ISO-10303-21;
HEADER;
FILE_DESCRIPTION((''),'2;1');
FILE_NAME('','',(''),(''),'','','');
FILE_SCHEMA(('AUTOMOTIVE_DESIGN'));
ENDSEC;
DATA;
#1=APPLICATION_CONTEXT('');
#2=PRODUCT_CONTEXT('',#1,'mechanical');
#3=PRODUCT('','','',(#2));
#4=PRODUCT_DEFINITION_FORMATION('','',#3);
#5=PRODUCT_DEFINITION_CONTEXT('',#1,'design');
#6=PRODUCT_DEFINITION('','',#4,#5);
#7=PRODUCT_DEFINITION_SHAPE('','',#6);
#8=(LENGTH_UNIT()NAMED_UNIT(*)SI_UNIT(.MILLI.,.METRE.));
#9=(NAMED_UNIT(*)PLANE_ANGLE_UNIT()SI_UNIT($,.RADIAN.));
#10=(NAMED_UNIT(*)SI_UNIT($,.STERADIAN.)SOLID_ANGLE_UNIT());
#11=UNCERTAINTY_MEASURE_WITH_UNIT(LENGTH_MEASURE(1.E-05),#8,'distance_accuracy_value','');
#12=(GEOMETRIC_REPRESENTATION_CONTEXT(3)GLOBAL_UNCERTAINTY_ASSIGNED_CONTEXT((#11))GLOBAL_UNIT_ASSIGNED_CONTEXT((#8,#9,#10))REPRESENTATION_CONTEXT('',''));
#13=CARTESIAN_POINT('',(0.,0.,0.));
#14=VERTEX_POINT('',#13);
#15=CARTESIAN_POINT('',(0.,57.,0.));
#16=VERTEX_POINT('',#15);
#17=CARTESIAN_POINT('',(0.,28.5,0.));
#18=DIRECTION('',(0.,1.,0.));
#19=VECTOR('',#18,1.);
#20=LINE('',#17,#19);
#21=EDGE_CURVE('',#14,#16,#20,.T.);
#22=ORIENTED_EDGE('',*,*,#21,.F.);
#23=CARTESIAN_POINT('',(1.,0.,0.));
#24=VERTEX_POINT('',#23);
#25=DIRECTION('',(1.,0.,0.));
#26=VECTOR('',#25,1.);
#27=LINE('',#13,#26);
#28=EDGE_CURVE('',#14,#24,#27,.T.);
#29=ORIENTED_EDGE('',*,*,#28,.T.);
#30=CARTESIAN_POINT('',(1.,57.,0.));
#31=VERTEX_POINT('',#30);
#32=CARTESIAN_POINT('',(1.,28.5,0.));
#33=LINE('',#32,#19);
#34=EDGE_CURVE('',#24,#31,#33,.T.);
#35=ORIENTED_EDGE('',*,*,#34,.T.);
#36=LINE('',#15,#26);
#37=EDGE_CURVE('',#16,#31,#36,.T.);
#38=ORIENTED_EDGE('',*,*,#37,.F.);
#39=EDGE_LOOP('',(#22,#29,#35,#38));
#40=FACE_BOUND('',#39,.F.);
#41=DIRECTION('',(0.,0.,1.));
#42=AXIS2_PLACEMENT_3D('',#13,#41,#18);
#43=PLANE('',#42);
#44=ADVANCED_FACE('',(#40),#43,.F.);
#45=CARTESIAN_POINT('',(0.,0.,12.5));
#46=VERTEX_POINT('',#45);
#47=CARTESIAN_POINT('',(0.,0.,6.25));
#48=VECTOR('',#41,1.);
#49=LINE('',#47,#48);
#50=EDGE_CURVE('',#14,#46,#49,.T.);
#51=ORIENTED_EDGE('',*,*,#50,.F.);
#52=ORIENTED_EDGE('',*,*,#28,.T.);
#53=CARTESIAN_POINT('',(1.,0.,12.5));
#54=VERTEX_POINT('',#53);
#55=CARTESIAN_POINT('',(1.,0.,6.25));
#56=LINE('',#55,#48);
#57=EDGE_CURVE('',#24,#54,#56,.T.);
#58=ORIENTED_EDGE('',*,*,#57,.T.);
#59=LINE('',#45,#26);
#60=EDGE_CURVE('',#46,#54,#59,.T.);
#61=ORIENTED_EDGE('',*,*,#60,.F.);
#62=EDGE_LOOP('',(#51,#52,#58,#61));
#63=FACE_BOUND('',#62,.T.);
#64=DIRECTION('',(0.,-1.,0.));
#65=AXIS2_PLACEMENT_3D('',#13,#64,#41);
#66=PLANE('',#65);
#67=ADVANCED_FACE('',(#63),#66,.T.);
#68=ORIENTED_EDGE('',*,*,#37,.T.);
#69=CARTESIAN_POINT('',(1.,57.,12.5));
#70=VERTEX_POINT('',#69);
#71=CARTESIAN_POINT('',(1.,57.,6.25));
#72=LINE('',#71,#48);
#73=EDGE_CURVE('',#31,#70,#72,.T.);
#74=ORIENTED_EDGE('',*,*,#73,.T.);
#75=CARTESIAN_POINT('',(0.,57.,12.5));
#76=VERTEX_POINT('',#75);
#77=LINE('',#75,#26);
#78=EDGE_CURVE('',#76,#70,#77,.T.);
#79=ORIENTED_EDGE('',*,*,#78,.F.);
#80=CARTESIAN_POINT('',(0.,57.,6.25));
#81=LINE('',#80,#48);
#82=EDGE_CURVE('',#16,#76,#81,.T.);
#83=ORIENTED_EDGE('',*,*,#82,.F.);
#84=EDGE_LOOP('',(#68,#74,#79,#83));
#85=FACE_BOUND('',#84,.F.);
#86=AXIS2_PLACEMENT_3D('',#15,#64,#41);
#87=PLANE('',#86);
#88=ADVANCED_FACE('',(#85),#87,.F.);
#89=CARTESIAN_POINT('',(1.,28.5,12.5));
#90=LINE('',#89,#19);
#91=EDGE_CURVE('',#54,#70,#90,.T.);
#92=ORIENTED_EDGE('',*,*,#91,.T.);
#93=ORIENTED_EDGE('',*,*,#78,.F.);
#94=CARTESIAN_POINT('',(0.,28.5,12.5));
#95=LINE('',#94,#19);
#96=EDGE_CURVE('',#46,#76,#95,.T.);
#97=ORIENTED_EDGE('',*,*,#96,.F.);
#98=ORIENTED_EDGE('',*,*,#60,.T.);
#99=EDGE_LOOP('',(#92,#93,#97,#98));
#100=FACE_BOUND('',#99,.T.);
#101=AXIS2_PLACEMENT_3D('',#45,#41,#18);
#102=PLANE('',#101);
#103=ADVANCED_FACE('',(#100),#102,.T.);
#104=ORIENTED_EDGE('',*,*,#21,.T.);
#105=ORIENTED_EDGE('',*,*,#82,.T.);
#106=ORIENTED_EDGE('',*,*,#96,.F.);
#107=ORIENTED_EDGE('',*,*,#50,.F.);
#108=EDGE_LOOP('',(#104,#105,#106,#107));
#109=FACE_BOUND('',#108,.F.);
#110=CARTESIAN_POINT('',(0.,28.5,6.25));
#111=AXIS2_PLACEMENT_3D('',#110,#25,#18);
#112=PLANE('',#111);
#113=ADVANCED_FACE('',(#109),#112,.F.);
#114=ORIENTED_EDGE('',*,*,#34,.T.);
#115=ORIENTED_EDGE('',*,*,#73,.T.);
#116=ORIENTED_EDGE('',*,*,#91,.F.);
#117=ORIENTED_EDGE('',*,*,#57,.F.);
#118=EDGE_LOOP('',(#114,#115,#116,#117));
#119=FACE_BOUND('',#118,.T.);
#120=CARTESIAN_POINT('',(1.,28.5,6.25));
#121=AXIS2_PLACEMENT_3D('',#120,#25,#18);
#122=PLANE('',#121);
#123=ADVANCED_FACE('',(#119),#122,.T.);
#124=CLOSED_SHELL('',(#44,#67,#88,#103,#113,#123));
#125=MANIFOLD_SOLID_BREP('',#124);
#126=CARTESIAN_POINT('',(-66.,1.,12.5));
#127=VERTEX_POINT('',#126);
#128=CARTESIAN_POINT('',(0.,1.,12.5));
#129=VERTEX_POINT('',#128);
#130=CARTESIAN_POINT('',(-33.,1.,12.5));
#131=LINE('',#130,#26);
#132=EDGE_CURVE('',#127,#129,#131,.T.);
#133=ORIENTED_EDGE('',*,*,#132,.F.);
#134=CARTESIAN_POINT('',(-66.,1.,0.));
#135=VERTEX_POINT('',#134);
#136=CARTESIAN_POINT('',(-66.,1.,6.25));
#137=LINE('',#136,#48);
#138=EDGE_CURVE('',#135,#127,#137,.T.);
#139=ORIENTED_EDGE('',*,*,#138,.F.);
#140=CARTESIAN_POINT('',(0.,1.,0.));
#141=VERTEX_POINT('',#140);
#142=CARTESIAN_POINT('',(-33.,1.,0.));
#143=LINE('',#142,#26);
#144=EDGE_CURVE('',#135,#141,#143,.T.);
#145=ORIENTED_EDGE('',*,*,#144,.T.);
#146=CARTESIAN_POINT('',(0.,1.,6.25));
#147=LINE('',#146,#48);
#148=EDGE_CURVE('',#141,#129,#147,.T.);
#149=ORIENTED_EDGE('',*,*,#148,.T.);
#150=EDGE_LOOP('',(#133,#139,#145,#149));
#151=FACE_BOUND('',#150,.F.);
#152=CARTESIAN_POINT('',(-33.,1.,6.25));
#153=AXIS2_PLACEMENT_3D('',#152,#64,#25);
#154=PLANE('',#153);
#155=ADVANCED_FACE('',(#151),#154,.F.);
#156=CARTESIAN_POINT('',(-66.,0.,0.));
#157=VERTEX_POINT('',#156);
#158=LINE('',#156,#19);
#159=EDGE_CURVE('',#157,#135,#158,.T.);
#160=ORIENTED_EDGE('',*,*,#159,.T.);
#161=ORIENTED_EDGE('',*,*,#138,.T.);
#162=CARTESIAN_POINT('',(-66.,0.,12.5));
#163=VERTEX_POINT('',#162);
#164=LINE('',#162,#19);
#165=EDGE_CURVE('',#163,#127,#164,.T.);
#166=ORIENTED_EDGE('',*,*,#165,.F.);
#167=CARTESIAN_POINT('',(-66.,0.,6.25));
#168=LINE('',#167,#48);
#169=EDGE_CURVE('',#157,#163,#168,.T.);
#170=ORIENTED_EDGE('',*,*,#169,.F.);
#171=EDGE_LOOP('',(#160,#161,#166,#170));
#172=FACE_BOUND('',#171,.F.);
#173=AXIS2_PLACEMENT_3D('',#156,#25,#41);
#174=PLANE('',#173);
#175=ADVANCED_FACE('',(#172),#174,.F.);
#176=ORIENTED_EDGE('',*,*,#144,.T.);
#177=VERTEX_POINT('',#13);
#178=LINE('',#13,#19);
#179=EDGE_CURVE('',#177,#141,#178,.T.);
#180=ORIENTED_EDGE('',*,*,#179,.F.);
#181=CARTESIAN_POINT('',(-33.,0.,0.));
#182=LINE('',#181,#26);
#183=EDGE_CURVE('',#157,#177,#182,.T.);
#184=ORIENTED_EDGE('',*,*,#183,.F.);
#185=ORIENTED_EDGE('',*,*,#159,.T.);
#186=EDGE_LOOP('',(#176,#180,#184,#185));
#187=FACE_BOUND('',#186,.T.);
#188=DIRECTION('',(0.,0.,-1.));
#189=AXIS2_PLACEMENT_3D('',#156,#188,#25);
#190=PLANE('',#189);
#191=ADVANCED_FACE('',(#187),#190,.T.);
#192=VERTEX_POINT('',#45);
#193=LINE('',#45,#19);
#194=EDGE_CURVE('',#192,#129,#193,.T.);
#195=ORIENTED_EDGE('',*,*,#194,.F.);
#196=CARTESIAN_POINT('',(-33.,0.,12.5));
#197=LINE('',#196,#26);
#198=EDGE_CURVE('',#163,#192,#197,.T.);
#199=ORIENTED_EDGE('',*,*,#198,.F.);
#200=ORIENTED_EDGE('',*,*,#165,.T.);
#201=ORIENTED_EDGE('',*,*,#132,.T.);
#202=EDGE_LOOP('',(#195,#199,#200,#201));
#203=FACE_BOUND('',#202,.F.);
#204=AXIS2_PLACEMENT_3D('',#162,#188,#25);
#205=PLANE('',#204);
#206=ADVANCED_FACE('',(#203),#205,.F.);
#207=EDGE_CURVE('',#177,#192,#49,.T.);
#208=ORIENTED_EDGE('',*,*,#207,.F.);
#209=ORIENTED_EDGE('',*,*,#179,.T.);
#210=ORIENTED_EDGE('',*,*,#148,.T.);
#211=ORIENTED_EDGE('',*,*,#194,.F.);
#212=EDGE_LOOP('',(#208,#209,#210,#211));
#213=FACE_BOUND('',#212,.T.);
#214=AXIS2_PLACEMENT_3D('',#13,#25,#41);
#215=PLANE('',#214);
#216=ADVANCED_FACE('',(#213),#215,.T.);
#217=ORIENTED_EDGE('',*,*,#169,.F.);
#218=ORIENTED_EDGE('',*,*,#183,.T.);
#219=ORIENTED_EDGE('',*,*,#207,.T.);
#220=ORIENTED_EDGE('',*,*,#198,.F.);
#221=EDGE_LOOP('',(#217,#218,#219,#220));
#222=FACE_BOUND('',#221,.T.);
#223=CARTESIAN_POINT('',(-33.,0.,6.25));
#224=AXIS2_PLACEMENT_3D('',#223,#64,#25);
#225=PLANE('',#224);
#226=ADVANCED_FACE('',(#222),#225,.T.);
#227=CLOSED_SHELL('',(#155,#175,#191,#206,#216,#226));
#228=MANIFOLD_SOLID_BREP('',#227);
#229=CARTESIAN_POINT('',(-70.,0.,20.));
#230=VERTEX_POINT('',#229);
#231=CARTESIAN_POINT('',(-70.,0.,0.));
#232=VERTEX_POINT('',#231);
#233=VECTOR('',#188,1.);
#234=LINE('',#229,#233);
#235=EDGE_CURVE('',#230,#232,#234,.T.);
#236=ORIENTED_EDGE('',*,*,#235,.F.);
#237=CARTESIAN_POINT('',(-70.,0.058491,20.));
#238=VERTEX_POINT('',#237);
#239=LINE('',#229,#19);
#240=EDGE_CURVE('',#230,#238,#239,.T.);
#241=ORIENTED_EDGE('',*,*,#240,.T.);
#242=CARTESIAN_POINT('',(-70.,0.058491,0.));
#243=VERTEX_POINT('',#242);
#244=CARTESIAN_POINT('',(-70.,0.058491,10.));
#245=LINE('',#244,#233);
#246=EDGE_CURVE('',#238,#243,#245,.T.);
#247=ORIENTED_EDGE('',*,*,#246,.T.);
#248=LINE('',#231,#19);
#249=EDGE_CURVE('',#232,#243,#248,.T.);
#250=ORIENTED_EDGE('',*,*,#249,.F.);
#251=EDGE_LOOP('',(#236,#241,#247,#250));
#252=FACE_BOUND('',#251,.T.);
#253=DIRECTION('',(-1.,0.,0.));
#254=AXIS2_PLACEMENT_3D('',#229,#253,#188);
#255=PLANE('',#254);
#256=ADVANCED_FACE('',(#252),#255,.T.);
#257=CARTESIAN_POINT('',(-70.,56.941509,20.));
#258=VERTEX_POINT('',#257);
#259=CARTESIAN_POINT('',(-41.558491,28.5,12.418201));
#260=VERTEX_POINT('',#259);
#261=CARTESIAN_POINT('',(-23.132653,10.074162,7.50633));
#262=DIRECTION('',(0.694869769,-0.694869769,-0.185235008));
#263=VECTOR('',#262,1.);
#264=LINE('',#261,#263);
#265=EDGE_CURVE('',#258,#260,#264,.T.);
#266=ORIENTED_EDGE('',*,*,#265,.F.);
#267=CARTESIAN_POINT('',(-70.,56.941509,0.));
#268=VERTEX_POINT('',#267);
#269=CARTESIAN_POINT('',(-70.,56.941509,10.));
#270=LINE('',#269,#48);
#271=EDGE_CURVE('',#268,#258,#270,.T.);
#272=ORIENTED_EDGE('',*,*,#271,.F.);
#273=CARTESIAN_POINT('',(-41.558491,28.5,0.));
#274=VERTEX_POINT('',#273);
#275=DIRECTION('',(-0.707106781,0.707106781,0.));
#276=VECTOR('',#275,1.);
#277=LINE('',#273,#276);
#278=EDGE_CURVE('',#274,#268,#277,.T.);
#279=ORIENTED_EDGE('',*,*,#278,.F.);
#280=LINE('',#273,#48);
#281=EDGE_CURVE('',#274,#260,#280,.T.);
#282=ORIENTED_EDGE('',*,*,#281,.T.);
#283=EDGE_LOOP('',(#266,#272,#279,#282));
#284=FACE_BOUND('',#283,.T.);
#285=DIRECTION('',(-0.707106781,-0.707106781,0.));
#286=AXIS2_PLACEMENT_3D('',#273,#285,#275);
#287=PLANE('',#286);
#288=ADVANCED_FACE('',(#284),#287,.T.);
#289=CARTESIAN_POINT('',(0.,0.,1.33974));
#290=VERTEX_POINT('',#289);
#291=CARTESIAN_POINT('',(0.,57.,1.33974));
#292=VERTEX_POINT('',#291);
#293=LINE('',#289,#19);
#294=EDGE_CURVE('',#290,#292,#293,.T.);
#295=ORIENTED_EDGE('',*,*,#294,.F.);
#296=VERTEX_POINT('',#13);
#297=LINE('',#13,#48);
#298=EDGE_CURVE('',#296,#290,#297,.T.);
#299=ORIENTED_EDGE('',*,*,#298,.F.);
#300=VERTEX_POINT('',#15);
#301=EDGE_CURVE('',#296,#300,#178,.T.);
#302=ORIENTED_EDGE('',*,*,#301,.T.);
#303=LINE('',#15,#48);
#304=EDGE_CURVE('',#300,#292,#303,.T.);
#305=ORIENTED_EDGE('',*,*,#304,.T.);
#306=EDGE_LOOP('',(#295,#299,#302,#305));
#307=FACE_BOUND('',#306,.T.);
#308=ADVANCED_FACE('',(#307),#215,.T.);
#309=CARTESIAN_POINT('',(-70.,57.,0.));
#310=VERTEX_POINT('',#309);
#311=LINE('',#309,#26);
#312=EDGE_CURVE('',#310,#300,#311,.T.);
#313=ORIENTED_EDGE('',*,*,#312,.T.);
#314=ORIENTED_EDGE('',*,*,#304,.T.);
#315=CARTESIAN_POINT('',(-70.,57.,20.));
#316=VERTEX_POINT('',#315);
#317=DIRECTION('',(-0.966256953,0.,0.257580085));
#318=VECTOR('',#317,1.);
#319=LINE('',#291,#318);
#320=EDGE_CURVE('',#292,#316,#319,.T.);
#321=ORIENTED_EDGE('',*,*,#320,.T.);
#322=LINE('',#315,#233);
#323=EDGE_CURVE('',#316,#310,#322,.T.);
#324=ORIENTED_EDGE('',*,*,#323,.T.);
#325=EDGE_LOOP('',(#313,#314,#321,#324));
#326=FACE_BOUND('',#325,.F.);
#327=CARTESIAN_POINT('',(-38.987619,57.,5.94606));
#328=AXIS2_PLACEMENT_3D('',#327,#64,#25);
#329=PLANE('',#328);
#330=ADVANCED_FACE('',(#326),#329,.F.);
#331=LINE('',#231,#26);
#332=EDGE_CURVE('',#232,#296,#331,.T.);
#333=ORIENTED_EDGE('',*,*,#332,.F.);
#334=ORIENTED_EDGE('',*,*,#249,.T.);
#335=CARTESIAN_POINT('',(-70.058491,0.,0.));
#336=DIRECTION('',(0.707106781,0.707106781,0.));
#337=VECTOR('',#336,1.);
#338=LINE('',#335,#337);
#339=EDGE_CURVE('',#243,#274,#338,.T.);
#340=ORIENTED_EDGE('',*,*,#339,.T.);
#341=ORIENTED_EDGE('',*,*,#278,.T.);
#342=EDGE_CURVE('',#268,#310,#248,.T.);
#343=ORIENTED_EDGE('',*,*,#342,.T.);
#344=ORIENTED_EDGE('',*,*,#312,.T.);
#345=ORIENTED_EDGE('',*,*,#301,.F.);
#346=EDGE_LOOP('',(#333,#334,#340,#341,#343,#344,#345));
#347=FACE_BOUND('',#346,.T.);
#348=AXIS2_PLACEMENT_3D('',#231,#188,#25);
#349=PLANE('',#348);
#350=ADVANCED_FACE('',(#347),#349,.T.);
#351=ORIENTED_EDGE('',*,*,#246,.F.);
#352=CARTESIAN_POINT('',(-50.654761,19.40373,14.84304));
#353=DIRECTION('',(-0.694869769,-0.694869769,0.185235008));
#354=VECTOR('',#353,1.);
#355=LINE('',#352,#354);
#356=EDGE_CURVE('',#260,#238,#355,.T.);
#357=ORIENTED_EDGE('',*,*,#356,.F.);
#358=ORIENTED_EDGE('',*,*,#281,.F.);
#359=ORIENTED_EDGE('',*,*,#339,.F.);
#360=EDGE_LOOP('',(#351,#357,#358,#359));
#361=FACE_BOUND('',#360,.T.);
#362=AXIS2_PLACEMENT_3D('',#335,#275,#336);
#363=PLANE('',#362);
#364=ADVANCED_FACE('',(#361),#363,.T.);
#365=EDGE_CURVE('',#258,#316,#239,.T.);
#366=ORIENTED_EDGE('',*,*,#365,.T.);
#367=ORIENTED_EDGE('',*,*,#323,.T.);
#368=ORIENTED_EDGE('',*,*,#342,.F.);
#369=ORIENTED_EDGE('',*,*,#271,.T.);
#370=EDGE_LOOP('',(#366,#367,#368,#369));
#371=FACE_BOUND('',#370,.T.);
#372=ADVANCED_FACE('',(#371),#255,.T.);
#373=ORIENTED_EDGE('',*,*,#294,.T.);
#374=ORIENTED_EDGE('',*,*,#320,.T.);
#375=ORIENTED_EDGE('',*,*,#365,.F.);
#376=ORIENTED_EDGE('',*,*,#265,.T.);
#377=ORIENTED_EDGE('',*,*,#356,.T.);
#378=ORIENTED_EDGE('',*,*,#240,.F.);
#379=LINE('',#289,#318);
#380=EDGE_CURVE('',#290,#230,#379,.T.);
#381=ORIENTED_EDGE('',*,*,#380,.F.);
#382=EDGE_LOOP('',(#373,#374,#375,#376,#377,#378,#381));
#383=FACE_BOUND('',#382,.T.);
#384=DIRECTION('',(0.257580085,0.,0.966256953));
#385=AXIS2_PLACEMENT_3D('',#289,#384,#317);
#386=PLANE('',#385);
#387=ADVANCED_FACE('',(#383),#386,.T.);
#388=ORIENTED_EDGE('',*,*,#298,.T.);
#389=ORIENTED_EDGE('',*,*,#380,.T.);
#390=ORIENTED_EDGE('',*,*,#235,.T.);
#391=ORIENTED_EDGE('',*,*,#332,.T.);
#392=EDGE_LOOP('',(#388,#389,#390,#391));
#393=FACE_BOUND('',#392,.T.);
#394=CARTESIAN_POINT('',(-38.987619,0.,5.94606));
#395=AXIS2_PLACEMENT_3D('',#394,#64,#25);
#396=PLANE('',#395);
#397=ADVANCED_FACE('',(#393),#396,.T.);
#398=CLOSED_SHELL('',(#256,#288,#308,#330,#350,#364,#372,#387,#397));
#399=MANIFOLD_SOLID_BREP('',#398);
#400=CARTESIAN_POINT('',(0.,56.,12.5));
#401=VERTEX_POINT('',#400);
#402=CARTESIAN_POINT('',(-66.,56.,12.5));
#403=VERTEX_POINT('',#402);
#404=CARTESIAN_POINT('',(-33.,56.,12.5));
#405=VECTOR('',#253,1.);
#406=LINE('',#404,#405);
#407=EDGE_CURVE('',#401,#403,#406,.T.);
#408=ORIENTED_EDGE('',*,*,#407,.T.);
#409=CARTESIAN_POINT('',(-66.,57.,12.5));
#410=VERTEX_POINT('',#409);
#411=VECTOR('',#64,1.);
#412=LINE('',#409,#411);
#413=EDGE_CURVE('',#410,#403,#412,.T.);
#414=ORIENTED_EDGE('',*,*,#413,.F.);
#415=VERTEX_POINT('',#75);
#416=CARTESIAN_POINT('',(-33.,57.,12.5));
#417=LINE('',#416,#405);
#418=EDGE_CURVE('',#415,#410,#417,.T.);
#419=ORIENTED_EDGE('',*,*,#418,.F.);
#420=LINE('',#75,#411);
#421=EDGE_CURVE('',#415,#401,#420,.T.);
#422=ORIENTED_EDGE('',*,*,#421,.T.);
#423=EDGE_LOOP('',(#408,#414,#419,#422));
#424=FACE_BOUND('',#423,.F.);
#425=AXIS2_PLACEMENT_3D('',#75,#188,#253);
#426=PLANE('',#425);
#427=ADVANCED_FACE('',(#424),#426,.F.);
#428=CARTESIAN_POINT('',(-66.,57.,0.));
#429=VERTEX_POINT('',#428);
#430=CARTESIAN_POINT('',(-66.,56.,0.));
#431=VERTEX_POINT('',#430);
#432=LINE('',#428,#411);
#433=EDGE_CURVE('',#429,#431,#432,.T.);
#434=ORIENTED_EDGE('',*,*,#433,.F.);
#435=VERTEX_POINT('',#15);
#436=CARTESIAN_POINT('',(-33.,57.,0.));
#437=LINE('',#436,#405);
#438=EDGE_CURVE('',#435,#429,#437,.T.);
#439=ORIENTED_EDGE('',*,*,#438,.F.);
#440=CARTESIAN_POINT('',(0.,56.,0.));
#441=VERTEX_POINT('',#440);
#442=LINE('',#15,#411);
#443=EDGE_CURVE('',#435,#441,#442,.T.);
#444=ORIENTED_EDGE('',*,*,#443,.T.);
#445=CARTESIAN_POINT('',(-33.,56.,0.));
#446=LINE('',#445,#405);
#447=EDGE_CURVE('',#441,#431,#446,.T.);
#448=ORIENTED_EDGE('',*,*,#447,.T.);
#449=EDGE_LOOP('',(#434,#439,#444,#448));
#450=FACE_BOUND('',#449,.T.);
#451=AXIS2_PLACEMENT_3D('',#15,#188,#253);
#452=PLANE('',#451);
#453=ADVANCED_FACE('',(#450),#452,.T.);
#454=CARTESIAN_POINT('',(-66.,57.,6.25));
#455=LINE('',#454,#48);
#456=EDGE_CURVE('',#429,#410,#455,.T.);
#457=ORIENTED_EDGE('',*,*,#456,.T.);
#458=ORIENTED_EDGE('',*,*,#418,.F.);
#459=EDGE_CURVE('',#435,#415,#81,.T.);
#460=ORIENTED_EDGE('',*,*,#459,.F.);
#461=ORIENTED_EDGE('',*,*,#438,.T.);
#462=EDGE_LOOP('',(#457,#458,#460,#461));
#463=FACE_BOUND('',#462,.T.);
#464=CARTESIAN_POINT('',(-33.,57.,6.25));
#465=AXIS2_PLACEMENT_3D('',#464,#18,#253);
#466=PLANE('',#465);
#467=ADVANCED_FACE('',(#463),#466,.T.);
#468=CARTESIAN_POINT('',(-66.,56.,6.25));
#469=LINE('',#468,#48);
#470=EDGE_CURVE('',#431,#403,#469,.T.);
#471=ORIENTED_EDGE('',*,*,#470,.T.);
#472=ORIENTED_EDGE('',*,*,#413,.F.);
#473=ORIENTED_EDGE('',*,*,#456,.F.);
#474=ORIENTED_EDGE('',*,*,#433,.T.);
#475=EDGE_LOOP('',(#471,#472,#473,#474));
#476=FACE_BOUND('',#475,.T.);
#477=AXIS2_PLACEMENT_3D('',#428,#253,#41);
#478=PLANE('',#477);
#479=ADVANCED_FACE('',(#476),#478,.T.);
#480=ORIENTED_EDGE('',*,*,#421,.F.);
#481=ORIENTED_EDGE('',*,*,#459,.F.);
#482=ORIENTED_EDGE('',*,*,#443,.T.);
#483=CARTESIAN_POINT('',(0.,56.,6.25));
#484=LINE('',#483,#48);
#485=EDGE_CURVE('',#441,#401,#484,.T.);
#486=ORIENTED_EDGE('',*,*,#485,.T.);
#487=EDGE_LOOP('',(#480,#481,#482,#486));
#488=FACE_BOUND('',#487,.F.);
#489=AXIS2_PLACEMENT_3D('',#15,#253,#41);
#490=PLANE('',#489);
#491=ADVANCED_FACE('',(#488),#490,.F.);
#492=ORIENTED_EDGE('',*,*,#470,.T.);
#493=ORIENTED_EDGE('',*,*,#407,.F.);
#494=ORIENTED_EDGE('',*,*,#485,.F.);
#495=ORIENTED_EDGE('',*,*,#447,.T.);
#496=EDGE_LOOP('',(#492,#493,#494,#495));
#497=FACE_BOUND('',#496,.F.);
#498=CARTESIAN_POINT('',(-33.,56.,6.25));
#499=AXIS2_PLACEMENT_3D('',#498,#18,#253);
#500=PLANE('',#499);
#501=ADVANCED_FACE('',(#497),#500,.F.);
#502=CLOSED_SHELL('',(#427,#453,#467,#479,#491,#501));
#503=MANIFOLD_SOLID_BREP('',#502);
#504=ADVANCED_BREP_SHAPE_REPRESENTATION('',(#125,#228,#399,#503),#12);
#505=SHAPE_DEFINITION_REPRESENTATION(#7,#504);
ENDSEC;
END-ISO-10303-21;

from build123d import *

# Parameters (mm, degrees)
F1_DEPTH  = 57
F2_W      = 57
F2_H      = 12.5
F3_DEPTH  = 1
F4_W      = 66
F4_H      = 12.5
F5_DEPTH  = 1
F7_W      = 66
F7_H      = 12.5
F8_DEPTH  = 1
F10_DEPTH = 25


# Not quite as in the source:
# - a feature names something its author has since deleted; it is built from what else it names


with BuildPart() as f1:
    # F0 (on Front) → F1 (new body)
    with BuildSketch(Plane.XZ):
        Polygon((-70, 0), (0, 0), (0, 1.33974), (-70, 20), align=None)
    extrude(amount=-F1_DEPTH)

    # F9 (on Top) → F10 (cut)
    with BuildSketch(Plane.XY):
        Polygon((-70.0584907394, 57), (-70.0584907394, 0), (-41.5584907394, 28.5), align=None)
    extrude(amount=F10_DEPTH, mode=Mode.SUBTRACT)


with BuildPart() as f3:
    # F2 (on Right) → F3 (new body)
    with BuildSketch(Plane.YZ):
        with Locations((28.5, 6.25)):
            Rectangle(F2_W, F2_H)
    extrude(amount=F3_DEPTH)


with BuildPart() as f5:
    # F4 (on Front) → F5 (new body)
    with BuildSketch(Plane.XZ):
        with Locations((-33, 6.25)):
            Rectangle(F4_W, F4_H)
    extrude(amount=-F5_DEPTH)


with BuildPart() as f8:
    # F7 (on offset) → F8 (new body)
    with BuildSketch(Plane(origin=(0, 57, 0), x_dir=(-1, 0, 0), z_dir=(0, 1, 0))):
        with Locations((33, 6.25)):
            Rectangle(F7_W, F7_H)
    extrude(amount=-F8_DEPTH)


solid = Compound([f1.part, f3.part, f5.part, f8.part])
